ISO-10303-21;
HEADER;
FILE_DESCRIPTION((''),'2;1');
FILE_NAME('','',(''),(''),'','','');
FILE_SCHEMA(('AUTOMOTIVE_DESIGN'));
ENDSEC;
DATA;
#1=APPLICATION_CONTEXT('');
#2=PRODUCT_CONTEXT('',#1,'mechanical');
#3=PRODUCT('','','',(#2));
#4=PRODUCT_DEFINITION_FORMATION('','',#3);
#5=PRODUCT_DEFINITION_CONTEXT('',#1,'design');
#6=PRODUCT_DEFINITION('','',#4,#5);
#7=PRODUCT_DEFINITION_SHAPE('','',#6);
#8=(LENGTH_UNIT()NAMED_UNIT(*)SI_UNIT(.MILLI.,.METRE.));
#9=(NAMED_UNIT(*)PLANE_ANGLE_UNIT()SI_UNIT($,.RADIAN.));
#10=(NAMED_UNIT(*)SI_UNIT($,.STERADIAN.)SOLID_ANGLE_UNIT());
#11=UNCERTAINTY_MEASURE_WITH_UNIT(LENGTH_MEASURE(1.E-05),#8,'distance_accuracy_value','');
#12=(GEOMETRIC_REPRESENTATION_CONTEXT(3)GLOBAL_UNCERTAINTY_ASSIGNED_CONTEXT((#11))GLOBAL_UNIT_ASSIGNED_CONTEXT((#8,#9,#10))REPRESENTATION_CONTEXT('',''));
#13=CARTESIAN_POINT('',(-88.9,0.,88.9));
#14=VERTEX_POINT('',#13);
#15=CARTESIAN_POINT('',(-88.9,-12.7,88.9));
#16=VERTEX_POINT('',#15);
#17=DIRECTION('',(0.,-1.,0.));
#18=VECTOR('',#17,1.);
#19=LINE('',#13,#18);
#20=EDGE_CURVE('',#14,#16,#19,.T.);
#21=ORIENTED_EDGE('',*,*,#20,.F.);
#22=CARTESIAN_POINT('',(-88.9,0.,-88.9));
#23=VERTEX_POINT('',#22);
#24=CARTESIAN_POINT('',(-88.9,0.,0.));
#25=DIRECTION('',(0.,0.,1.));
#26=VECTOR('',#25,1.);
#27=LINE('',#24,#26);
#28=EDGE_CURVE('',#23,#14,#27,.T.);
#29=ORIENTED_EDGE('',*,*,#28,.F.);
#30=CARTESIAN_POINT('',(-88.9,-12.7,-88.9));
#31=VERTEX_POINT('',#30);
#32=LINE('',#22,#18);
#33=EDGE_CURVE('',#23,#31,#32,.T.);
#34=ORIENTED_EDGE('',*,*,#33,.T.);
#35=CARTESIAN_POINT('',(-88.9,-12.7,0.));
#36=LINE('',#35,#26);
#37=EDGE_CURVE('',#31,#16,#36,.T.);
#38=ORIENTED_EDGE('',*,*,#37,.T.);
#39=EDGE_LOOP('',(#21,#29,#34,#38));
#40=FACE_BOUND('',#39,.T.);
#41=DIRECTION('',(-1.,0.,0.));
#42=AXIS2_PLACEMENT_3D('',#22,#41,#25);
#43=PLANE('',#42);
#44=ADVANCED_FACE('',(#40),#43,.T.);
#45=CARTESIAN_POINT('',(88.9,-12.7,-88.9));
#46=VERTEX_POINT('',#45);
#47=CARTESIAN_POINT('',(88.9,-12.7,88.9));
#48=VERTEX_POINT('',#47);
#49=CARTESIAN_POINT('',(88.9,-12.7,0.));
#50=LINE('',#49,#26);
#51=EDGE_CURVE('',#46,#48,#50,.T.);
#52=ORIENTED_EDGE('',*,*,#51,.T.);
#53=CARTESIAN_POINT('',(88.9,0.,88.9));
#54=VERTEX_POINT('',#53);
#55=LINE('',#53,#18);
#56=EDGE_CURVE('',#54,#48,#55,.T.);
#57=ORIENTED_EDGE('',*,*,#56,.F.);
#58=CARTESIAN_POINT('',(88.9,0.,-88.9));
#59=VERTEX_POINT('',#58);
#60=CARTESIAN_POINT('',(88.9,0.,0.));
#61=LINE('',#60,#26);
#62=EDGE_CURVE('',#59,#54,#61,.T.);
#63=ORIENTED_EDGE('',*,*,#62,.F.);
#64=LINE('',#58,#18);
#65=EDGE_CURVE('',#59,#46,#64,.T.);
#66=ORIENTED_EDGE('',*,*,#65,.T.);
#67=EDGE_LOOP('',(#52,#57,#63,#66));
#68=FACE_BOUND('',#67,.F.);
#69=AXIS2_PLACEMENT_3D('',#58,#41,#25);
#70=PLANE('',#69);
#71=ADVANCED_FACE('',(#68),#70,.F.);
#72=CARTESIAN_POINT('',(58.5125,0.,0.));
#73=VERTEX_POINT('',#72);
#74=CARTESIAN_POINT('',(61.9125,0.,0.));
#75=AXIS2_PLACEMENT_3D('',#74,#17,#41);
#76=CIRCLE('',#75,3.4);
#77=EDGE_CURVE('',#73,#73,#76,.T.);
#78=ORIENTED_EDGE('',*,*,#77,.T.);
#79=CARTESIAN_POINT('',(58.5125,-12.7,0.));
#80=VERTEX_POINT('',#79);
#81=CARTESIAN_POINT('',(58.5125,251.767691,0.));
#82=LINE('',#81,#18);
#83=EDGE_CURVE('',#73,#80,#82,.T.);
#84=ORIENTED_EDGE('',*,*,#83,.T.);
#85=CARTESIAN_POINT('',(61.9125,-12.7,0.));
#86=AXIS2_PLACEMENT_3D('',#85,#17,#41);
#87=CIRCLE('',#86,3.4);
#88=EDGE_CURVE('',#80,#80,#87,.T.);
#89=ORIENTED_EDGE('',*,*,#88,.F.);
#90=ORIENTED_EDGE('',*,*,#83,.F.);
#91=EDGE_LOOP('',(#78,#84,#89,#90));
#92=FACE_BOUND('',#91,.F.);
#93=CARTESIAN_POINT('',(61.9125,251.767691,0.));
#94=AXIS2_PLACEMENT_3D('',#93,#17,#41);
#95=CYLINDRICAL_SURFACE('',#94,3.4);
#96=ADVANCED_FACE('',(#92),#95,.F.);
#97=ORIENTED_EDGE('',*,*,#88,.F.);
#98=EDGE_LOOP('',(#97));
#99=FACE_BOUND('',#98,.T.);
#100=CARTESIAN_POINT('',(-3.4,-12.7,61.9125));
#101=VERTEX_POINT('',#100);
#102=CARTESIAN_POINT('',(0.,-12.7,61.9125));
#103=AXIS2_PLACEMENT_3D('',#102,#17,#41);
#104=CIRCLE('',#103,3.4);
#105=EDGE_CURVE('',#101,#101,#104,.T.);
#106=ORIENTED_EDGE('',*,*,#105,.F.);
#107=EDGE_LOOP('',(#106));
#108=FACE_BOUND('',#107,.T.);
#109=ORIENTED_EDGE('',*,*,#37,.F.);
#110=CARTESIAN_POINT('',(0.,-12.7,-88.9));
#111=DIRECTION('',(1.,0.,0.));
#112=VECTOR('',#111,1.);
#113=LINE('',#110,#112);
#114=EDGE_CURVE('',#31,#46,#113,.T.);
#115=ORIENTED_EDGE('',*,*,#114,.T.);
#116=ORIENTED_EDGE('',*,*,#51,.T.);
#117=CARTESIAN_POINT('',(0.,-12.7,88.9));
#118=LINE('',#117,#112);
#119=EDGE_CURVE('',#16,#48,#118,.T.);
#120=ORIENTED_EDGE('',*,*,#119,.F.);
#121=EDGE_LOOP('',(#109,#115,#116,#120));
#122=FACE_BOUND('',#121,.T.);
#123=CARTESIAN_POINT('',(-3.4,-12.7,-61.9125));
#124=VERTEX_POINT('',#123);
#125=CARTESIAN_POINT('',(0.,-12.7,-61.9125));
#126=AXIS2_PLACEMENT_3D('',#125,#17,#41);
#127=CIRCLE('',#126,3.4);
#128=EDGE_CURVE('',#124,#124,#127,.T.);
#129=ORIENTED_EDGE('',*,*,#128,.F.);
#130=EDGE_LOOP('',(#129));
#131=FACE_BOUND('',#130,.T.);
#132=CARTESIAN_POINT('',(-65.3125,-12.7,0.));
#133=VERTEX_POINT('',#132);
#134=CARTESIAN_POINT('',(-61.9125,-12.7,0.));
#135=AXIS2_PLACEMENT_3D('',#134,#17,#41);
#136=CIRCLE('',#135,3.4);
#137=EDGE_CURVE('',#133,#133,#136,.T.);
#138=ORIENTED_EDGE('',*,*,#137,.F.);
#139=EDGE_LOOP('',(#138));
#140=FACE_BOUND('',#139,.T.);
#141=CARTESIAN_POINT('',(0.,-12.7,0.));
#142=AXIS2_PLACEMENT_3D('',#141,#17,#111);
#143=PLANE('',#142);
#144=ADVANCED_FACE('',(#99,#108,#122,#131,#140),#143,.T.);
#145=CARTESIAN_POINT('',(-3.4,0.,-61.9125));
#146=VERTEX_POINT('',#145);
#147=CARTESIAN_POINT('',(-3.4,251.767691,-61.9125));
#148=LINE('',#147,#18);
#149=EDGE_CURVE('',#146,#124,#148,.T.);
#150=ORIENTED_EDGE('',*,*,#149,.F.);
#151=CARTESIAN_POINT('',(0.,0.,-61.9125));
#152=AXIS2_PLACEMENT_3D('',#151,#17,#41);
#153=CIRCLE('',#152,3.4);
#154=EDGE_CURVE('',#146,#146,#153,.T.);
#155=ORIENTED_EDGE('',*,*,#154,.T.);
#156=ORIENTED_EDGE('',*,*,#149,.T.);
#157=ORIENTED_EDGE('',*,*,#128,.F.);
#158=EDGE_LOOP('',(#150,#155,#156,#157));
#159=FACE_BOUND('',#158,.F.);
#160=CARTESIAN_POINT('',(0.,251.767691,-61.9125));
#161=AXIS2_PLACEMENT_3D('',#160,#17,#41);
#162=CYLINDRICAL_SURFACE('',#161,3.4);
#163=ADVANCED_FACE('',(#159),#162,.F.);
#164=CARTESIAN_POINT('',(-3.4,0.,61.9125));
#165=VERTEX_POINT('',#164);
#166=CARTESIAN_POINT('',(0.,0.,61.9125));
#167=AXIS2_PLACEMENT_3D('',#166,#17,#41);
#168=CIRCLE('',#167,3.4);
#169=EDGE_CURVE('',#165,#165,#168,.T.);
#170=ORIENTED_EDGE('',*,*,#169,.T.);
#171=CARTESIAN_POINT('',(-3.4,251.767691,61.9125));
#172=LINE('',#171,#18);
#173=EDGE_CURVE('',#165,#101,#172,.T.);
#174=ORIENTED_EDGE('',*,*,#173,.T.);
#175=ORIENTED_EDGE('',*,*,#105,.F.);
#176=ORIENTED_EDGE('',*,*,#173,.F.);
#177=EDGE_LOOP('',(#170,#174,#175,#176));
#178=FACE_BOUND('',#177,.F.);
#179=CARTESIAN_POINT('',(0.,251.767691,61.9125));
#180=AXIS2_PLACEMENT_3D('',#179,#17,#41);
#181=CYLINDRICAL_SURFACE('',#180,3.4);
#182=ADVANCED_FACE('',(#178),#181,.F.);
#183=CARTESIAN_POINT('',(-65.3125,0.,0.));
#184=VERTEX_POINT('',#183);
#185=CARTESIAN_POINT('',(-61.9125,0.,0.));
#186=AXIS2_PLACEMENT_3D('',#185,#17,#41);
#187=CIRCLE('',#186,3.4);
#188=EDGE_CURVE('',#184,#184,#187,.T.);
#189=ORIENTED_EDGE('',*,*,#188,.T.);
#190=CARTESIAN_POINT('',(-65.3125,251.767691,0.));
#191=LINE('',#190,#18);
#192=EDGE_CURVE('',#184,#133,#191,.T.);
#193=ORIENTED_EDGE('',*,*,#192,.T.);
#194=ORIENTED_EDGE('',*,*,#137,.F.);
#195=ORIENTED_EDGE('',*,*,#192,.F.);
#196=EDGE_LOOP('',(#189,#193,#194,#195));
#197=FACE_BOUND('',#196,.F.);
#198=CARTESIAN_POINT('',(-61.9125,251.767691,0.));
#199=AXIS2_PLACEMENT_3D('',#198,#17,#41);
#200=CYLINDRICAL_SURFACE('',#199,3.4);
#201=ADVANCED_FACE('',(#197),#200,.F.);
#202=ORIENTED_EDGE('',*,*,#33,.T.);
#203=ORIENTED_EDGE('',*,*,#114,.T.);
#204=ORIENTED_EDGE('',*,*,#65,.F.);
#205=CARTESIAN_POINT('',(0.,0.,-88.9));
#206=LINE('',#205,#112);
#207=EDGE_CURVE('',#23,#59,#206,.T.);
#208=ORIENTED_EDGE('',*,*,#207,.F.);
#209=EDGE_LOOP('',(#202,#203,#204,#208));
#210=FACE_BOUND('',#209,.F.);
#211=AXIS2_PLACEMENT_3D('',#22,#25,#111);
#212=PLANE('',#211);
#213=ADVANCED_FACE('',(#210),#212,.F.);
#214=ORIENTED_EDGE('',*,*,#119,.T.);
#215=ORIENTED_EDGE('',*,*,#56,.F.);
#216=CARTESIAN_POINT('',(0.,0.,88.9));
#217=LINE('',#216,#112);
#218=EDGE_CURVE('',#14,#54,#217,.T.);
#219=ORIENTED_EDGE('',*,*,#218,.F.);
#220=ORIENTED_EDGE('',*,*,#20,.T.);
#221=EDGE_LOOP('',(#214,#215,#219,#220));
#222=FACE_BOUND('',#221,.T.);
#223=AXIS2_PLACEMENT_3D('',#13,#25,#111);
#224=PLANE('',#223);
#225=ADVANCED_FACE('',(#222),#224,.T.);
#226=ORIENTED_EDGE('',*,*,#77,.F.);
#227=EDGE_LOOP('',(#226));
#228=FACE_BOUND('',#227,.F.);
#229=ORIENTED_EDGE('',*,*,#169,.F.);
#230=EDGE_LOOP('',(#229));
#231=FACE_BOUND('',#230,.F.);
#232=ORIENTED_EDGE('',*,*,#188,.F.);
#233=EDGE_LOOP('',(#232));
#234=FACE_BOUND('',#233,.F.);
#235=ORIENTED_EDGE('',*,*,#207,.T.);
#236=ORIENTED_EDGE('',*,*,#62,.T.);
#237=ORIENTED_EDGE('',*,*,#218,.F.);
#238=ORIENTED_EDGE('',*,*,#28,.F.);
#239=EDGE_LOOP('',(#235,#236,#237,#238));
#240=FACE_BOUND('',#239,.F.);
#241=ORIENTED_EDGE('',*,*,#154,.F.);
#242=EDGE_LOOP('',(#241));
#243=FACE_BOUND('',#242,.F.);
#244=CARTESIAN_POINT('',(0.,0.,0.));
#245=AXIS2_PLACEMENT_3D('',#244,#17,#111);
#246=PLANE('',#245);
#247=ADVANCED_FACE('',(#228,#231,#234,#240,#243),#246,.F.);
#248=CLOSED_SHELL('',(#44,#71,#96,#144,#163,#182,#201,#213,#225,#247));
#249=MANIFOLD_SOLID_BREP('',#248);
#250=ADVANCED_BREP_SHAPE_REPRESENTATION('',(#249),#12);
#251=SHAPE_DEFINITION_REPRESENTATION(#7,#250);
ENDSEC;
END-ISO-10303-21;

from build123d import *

# Parameters (mm, degrees)
F0_W     = 177.8
F0_H     = 177.8
F1_DEPTH = 12.7
F2_D     = 6.8


# Not quite as in the source:
# - a length typed as a fraction of an inch, garbled in the dataset ("3 / 203.2 mm" for 3/8 in), is restored


with BuildPart() as f1:
    # F0 (on Front) → F1 (new body)
    with BuildSketch(Plane.XZ):
        with Locations((0, -7.6e-09)):
            Rectangle(F0_W, F0_H)
    extrude(amount=F1_DEPTH)

    # F2 (through all)
    with Locations(Plane(origin=(0, 0, 0), x_dir=(1, 0, 0), z_dir=(0, 1, 0))):
        with Locations((-61.9125, 7.6e-09), (0, -61.9124999924), (61.9125, 7.6e-09), (0, 61.9124999319)):
            Hole(F2_D / 2)


solid = f1.part
